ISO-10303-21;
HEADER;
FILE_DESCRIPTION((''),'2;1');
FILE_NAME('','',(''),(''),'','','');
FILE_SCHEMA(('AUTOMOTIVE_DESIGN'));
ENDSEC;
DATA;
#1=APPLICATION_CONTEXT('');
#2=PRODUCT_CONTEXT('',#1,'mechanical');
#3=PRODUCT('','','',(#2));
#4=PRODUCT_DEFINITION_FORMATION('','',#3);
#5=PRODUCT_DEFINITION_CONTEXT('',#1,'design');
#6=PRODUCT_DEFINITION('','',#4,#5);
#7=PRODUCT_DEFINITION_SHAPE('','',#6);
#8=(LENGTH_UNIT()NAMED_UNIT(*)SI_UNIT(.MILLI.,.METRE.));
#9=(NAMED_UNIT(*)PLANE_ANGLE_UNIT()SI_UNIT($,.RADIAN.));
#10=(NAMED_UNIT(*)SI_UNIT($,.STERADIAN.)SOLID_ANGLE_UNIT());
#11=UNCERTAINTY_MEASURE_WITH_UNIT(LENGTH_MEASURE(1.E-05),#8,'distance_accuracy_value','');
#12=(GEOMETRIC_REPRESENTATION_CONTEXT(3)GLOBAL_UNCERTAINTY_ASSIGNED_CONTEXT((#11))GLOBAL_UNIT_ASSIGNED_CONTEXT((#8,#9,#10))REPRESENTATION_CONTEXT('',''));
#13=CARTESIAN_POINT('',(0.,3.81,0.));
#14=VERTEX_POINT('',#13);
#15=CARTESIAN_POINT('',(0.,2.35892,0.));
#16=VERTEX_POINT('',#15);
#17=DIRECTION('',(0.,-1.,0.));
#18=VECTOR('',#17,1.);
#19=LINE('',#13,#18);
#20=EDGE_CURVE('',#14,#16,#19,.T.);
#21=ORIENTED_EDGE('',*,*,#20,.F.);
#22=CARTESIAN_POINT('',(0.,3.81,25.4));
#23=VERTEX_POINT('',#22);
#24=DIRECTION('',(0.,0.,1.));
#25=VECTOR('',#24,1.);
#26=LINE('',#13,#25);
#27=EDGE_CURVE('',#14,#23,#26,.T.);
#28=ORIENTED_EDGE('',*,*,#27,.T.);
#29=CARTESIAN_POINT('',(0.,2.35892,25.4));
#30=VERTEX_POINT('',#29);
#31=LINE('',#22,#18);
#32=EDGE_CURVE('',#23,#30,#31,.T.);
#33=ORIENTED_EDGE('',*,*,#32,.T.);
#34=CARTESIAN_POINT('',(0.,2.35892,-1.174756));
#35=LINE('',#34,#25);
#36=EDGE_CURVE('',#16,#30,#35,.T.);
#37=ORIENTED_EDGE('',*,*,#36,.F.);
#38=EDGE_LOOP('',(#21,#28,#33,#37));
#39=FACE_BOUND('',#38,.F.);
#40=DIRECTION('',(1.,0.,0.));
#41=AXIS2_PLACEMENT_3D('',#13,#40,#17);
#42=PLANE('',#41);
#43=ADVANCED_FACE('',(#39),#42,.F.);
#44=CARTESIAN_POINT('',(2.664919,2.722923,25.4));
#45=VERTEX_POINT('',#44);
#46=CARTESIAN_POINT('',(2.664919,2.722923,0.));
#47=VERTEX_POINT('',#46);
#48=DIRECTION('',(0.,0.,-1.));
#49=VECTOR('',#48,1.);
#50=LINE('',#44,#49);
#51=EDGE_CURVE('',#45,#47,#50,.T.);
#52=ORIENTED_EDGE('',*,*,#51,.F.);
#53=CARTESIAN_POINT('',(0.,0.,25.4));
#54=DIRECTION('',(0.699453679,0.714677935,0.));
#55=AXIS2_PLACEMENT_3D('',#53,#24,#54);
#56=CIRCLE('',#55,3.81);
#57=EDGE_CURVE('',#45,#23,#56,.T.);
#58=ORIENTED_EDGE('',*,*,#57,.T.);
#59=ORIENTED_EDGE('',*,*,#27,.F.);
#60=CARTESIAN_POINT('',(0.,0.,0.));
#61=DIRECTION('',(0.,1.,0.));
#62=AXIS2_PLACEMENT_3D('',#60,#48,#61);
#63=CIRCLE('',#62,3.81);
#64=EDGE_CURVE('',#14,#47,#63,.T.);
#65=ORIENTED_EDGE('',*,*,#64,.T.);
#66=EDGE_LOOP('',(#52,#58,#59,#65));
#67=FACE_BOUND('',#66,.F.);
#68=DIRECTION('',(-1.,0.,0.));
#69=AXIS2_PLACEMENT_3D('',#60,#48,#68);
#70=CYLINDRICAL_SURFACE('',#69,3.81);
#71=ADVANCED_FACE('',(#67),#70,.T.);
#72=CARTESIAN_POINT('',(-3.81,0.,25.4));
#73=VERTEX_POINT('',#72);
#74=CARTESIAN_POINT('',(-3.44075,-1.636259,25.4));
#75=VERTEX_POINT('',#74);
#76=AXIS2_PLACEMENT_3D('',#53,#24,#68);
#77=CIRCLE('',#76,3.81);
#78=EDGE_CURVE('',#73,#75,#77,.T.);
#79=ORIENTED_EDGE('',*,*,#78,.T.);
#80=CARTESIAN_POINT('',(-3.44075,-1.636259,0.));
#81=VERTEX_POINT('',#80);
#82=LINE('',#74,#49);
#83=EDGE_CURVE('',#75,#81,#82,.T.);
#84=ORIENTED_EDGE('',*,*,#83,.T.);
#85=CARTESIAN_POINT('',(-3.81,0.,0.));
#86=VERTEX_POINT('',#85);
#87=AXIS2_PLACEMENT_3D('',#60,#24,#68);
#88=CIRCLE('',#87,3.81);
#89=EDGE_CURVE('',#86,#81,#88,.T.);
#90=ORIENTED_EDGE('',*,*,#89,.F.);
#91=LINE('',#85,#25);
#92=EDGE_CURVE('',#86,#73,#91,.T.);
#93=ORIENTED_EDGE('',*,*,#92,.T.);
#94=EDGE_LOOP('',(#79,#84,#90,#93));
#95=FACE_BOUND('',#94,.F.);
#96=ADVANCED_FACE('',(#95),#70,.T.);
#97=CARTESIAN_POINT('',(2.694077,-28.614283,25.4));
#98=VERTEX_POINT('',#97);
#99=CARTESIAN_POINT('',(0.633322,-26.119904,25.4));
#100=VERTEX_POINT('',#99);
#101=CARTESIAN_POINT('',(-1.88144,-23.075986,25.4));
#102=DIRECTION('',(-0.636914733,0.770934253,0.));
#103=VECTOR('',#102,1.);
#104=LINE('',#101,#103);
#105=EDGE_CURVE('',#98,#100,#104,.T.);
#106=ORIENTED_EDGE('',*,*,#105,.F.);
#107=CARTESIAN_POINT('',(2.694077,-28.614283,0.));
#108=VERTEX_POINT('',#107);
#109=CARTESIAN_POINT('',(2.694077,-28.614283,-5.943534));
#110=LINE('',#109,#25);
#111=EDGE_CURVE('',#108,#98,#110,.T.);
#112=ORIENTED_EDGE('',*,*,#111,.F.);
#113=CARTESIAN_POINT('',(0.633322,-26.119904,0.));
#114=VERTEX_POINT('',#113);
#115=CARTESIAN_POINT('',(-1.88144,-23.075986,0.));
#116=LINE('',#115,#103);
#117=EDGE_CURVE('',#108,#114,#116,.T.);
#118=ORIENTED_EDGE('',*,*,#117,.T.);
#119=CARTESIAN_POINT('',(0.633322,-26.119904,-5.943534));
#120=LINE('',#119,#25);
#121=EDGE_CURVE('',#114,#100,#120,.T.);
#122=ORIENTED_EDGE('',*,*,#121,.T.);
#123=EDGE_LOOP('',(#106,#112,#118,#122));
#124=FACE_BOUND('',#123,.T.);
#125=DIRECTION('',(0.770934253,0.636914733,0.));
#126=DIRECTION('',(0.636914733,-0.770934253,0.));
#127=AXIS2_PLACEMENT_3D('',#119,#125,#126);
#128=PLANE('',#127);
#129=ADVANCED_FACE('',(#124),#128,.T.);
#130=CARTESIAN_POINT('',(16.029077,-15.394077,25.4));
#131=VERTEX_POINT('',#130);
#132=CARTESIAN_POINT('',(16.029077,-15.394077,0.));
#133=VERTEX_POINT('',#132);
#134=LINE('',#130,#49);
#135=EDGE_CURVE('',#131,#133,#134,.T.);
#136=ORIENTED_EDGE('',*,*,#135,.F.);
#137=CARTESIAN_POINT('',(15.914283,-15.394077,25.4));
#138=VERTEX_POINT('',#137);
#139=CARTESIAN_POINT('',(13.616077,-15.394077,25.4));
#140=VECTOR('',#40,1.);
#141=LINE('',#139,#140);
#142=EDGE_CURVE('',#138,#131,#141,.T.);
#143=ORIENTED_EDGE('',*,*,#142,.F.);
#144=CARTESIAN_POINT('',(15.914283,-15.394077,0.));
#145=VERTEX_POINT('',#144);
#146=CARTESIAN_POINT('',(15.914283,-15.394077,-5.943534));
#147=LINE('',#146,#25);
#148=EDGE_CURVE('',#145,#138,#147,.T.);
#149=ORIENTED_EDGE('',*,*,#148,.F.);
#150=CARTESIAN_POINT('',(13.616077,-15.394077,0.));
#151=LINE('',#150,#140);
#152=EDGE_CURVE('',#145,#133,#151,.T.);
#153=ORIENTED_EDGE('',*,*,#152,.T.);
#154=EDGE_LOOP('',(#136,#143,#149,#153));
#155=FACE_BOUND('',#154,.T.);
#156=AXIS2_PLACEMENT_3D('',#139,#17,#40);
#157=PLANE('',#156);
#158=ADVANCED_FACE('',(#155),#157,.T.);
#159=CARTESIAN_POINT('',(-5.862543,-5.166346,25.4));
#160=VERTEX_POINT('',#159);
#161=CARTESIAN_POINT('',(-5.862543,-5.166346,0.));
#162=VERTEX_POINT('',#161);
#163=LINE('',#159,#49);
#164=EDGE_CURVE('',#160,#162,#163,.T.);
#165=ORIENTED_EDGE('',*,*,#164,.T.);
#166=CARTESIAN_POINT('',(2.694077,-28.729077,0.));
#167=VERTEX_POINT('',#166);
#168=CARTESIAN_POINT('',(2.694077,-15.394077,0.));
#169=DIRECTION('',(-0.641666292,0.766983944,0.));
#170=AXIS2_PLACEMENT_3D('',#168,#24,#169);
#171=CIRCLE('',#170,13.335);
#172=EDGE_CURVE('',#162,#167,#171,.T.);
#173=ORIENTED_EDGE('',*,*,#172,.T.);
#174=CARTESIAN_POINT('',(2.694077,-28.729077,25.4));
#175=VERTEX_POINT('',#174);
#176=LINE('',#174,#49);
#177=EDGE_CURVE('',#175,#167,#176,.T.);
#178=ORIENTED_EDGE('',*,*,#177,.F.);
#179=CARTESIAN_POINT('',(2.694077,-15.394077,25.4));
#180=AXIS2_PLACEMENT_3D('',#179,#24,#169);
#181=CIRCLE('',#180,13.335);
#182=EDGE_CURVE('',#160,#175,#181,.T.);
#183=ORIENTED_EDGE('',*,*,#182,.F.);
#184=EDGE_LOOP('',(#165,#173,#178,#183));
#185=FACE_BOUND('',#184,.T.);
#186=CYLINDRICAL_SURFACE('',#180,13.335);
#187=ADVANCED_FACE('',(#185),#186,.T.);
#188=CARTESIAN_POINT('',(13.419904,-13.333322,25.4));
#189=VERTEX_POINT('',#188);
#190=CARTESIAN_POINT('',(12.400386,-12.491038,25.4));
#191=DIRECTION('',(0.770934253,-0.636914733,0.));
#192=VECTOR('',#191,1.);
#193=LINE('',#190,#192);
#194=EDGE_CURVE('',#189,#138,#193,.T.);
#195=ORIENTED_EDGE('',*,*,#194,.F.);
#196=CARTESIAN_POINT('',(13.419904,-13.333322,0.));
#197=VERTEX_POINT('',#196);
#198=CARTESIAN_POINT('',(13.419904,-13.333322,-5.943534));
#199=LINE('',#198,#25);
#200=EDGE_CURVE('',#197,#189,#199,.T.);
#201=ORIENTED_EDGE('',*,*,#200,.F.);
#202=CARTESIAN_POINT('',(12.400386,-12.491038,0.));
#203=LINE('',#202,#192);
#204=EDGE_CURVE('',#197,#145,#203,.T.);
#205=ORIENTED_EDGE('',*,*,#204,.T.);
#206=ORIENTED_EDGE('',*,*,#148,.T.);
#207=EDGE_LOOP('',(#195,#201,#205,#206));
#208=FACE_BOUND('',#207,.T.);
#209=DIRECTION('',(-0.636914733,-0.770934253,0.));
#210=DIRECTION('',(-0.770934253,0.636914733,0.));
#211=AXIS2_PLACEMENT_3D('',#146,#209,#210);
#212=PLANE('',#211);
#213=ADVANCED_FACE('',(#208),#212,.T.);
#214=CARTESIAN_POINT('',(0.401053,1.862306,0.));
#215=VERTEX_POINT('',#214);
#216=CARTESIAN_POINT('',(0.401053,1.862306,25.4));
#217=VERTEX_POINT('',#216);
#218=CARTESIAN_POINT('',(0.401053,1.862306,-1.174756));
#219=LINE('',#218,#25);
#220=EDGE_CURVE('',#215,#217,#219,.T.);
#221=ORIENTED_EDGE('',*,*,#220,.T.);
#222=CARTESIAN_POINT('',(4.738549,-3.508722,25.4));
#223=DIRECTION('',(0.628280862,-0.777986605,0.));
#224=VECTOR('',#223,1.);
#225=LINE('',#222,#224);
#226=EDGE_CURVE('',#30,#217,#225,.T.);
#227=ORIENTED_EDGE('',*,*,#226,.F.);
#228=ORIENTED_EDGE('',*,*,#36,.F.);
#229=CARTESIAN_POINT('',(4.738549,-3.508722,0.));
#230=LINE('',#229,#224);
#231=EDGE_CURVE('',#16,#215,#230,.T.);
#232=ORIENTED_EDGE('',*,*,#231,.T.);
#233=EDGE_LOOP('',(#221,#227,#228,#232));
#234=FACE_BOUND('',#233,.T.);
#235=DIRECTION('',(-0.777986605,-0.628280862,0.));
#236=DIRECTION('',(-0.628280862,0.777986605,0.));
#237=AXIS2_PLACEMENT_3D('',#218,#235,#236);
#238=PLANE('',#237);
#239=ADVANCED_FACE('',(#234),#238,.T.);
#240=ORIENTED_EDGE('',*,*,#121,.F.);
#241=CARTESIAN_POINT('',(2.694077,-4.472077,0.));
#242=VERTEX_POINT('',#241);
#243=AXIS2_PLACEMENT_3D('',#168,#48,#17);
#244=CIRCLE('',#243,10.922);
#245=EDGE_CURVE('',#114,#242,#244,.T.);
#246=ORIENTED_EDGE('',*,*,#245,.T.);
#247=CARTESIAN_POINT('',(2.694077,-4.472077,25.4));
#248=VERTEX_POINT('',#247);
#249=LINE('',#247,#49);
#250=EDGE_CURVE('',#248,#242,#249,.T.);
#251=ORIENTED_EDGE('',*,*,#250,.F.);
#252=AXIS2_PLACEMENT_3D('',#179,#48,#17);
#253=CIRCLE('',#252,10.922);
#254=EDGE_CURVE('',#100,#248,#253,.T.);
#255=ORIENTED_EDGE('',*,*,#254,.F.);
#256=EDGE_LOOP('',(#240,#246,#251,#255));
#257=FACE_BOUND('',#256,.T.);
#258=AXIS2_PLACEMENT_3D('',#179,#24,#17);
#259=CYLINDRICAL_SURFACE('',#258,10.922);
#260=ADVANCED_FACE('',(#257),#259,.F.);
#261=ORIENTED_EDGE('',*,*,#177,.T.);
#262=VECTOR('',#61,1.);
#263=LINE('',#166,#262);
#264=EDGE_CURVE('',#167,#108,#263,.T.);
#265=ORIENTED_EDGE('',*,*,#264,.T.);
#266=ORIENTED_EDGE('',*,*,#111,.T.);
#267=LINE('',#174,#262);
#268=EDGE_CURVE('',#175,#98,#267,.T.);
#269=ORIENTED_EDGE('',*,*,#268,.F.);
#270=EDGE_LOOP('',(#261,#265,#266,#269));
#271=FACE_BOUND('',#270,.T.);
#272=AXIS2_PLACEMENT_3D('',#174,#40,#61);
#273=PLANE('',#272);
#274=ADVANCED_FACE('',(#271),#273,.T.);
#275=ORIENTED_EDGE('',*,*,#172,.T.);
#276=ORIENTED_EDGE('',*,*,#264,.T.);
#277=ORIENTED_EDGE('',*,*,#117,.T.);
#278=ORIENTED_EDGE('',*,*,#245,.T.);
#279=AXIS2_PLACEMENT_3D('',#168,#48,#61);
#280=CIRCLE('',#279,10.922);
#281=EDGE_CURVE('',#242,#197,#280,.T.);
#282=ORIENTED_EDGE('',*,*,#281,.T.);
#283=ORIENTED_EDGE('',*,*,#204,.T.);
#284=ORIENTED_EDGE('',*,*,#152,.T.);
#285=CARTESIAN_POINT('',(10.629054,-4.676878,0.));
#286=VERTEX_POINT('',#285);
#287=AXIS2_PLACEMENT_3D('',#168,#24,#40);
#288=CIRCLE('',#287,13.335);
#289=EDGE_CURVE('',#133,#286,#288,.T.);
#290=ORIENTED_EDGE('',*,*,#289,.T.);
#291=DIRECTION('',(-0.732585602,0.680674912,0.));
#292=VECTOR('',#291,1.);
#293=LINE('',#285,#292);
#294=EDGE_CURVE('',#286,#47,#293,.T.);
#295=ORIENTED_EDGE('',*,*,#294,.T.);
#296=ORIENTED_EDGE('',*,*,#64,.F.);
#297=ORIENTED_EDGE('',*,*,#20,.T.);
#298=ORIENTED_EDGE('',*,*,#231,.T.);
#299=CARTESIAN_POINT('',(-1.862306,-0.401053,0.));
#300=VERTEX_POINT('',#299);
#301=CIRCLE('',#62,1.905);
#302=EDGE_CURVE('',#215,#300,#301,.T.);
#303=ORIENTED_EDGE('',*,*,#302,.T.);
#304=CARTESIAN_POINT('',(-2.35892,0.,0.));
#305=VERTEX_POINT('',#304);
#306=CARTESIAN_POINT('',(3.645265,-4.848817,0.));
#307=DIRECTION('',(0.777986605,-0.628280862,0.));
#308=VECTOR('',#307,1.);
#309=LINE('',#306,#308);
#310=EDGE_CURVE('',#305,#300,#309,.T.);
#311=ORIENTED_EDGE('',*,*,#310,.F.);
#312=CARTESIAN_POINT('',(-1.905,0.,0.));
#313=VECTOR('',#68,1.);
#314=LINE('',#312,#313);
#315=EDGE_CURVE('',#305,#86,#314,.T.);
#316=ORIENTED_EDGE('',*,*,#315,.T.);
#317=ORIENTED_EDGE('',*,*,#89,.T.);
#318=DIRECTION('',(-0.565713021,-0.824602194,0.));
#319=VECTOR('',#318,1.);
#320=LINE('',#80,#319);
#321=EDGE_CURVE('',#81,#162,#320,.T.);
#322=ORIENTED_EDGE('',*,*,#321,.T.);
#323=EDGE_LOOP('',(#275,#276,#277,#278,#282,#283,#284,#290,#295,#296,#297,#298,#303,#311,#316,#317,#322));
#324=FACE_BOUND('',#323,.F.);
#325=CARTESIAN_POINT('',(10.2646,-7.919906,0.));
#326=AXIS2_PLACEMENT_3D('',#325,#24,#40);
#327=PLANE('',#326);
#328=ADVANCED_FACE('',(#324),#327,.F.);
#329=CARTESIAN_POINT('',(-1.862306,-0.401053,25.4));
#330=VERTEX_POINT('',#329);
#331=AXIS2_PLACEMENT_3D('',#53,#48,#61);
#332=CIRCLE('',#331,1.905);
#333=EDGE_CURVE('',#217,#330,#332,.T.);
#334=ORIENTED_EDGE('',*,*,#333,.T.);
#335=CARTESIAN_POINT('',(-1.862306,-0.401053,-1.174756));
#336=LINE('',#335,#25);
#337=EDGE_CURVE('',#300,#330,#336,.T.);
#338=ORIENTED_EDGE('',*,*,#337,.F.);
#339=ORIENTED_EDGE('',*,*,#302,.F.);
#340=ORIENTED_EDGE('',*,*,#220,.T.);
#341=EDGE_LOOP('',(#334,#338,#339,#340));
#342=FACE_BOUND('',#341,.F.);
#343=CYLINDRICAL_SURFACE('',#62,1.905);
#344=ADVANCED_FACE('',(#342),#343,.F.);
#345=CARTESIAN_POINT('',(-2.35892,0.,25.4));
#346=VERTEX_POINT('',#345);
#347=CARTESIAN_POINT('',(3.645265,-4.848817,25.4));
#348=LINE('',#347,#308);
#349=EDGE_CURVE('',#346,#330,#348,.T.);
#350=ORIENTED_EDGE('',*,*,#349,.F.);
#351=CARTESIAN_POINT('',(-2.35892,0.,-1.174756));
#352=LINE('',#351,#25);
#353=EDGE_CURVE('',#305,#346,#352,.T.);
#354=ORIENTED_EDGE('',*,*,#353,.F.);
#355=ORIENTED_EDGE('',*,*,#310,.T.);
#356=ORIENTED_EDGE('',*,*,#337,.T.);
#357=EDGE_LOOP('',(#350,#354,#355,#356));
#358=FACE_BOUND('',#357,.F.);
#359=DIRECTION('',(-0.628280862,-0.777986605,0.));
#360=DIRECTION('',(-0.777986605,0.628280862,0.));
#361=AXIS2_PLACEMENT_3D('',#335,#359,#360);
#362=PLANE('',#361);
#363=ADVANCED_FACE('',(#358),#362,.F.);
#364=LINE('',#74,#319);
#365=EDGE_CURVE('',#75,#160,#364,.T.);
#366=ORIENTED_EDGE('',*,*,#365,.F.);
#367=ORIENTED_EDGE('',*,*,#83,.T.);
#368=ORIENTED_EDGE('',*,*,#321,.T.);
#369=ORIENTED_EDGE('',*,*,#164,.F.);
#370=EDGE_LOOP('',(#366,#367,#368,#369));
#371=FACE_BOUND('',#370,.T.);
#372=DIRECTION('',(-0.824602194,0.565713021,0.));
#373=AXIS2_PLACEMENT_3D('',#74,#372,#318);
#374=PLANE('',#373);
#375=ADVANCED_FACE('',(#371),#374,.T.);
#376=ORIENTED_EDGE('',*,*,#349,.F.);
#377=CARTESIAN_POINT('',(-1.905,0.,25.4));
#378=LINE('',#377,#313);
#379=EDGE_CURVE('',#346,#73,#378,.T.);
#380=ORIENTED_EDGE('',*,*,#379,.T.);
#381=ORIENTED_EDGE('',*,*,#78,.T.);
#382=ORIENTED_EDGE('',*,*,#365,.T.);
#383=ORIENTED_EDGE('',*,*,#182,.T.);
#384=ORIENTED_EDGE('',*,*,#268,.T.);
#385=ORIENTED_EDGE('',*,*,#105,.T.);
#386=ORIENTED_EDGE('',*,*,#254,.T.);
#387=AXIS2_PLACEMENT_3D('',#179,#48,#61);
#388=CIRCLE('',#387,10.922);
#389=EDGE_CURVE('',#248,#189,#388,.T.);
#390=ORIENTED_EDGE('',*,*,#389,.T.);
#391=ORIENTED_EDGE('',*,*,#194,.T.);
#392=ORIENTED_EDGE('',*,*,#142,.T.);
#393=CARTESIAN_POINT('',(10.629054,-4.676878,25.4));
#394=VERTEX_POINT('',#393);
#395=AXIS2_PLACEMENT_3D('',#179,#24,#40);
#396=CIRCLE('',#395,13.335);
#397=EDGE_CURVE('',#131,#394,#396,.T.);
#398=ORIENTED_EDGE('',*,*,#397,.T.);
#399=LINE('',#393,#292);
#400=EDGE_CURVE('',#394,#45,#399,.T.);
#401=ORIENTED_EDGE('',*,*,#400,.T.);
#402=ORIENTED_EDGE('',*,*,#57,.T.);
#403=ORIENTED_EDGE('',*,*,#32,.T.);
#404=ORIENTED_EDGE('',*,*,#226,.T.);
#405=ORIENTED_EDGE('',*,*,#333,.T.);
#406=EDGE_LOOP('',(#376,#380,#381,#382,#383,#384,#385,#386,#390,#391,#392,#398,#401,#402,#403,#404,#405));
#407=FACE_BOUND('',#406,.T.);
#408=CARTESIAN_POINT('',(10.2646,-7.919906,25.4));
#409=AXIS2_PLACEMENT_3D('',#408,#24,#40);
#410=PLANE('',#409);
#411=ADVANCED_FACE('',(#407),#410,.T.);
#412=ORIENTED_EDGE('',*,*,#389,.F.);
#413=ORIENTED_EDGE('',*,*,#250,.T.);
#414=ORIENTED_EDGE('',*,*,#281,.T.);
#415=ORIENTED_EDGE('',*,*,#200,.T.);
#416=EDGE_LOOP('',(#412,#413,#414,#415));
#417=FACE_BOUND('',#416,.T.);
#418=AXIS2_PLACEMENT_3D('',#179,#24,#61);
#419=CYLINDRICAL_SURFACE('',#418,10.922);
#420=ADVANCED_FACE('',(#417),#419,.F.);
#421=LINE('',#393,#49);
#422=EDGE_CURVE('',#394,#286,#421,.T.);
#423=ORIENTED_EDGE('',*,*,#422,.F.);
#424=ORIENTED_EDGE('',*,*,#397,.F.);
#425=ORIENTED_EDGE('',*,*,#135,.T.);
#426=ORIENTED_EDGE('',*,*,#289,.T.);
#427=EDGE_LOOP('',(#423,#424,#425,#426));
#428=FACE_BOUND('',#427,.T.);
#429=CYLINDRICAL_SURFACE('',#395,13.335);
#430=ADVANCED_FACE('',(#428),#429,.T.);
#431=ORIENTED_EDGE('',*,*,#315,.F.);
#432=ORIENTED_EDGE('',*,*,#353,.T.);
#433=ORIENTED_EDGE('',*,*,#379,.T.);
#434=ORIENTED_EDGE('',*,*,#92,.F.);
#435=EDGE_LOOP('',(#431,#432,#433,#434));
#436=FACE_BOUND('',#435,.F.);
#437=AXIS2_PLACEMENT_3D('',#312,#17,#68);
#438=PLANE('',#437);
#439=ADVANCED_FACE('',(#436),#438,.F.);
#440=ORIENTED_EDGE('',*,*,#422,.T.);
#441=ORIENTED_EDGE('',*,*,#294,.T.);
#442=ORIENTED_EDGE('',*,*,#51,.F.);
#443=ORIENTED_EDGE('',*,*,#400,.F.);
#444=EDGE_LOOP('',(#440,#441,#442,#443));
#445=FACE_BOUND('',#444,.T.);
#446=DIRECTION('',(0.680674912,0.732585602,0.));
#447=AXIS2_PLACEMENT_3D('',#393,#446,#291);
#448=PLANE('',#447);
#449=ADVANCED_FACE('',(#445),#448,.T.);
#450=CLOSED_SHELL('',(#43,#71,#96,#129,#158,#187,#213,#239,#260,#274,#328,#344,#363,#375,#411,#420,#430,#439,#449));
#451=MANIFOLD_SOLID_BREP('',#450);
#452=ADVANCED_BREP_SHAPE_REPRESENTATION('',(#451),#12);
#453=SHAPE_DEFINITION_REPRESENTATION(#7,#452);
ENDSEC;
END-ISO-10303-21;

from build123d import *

# Parameters (mm, degrees)
F1_DEPTH    = 25.4
F3_DEPTH    = 25.4
F4_T1_DEPTH = 37.28706828
F5_T1_DEPTH = 27.7495122548


# Not quite as in the source:
# - a fillet or chamfer that OpenCascade refuses, or shapes differently, is made with other operations: its cross-section is extruded or revolved along the edge and cut away or added


with BuildPart() as f1:
    # F0 (on Top) → F1 (new body)
    with BuildSketch(Plane.XY):
        with BuildLine():
            ThreePointArc((0, 1.905), (1.3470384182, -1.3470384182), (-1.905, 0))
            Line((-1.905, 0), (-3.81, 0))
            ThreePointArc((-3.81, 0), (2.6940768363, -2.6940768363), (0, 3.81))
            Line((0, 3.81), (0, 1.905))
        make_face()
    extrude(amount=F1_DEPTH)

    # F2 (on face) → F3 (join)
    with BuildSketch(Plane.XY.offset(25.4)):
        with BuildLine():
            ThreePointArc((3.1994926084, -2.0686582726), (2.9633304397, -2.3947385463), (2.6940768363, -2.6940768363))
            Line((2.6940768363, -2.6940768363), (2.6940768363, -4.4720768363))
            ThreePointArc((2.6940768363, -4.4720768363), (10.4170971004, -7.6710565722), (13.6160768363, -15.3940768363))
            Line((13.6160768363, -15.3940768363), (16.0290768363, -15.3940768363))
            ThreePointArc((16.0290768363, -15.3940768363), (14.6027952108, -9.393689209), (10.6290540875, -4.6768775275))
            ThreePointArc((10.6290540875, -4.6768775275), (7.1111754901, -2.8118884542), (3.1994926084, -2.0686582726))
        make_face()
        with BuildLine():
            Line((2.5200781238, 2.8575), (2.6649185174, 2.7229229323))
            ThreePointArc((2.6649185174, 2.7229229323), (2.5933714137, 2.7911511444), (2.5200781238, 2.8575))
        make_face()
        with BuildLine():
            Line((2.6940768363, -4.4720768363), (2.6940768363, -2.6940768363))
            ThreePointArc((2.6940768363, -2.6940768363), (0.2570925649, -3.8013160107), (-2.3067877079, -3.0322978862))
            ThreePointArc((-2.3067877079, -3.0322978862), (-4.1681303207, -3.9602525446), (-5.862543163, -5.1663459449))
            ThreePointArc((-5.862543163, -5.1663459449), (-9.840056888, -19.9457487029), (2.6940768363, -28.7290768363))
            Line((2.6940768363, -28.7290768363), (2.6940768363, -26.3160768363))
            ThreePointArc((2.6940768363, -26.3160768363), (-8.2279231637, -15.3940768363), (2.6940768363, -4.4720768363))
        make_face()
        with BuildLine():
            ThreePointArc((2.6649185174, 2.7229229323), (3.7865078996, 0.4224428078), (3.1994926084, -2.0686582726))
            ThreePointArc((3.1994926084, -2.0686582726), (7.1111754901, -2.8118884542), (10.6290540875, -4.6768775275))
            Line((10.6290540875, -4.6768775275), (2.6649185174, 2.7229229323))
        make_face()
        with BuildLine():
            ThreePointArc((-5.862543163, -5.1663459449), (-4.1681303207, -3.9602525446), (-2.3067877079, -3.0322978862))
            ThreePointArc((-2.3067877079, -3.0322978862), (-2.9573260731, -2.4021495576), (-3.4407495541, -1.6362586916))
            Line((-3.4407495541, -1.6362586916), (-5.862543163, -5.1663459449))
        make_face()
    extrude(amount=-F3_DEPTH)

    # F4: chamfer of 2.54 on 2 edges, made by hand

    # F4_s2 → F4_t1 (cut)
    with BuildSketch(Plane.XY.offset(-5.94353414)):
        with BuildLine():
            Line((0.6333221193, -26.1199042634), (2.6940768363, -28.6142827349))
            Line((2.6940768363, -28.6142827349), (2.6940768363, -26.3160768363))
            ThreePointArc((2.6940768363, -26.3160768363), (1.6230071606, -26.2634325555), (0.6333221193, -26.1199042634))
        make_face()
        with BuildLine():
            Line((15.9142827349, -15.3940768363), (13.4199042634, -13.3333221193))
            ThreePointArc((13.4199042634, -13.3333221193), (13.5634325555, -14.3230071606), (13.6160768363, -15.3940768363))
            Line((13.6160768363, -15.3940768363), (15.9142827349, -15.3940768363))
        make_face()
    extrude(amount=F4_T1_DEPTH, mode=Mode.SUBTRACT)

    # F5: chamfer of 0.508 on 2 edges, made by hand

    # F5_s2 → F5_t1 (cut)
    with BuildSketch(Plane.XY.offset(-1.1747561274)):
        with BuildLine():
            Line((-1.8623055031, -0.4010526316), (-2.3589203039, 0))
            Line((-2.3589203039, 0), (-1.905, 0))
            ThreePointArc((-1.905, 0), (-1.8935148697, -0.2088694284), (-1.8623055031, -0.4010526316))
        make_face()
        with BuildLine():
            Line((0.4010526316, 1.8623055031), (0, 2.3589203039))
            Line((0, 2.3589203039), (0, 1.905))
            ThreePointArc((0, 1.905), (0.2088694284, 1.8935148697), (0.4010526316, 1.8623055031))
        make_face()
    extrude(amount=F5_T1_DEPTH, mode=Mode.SUBTRACT)


solid = f1.part
